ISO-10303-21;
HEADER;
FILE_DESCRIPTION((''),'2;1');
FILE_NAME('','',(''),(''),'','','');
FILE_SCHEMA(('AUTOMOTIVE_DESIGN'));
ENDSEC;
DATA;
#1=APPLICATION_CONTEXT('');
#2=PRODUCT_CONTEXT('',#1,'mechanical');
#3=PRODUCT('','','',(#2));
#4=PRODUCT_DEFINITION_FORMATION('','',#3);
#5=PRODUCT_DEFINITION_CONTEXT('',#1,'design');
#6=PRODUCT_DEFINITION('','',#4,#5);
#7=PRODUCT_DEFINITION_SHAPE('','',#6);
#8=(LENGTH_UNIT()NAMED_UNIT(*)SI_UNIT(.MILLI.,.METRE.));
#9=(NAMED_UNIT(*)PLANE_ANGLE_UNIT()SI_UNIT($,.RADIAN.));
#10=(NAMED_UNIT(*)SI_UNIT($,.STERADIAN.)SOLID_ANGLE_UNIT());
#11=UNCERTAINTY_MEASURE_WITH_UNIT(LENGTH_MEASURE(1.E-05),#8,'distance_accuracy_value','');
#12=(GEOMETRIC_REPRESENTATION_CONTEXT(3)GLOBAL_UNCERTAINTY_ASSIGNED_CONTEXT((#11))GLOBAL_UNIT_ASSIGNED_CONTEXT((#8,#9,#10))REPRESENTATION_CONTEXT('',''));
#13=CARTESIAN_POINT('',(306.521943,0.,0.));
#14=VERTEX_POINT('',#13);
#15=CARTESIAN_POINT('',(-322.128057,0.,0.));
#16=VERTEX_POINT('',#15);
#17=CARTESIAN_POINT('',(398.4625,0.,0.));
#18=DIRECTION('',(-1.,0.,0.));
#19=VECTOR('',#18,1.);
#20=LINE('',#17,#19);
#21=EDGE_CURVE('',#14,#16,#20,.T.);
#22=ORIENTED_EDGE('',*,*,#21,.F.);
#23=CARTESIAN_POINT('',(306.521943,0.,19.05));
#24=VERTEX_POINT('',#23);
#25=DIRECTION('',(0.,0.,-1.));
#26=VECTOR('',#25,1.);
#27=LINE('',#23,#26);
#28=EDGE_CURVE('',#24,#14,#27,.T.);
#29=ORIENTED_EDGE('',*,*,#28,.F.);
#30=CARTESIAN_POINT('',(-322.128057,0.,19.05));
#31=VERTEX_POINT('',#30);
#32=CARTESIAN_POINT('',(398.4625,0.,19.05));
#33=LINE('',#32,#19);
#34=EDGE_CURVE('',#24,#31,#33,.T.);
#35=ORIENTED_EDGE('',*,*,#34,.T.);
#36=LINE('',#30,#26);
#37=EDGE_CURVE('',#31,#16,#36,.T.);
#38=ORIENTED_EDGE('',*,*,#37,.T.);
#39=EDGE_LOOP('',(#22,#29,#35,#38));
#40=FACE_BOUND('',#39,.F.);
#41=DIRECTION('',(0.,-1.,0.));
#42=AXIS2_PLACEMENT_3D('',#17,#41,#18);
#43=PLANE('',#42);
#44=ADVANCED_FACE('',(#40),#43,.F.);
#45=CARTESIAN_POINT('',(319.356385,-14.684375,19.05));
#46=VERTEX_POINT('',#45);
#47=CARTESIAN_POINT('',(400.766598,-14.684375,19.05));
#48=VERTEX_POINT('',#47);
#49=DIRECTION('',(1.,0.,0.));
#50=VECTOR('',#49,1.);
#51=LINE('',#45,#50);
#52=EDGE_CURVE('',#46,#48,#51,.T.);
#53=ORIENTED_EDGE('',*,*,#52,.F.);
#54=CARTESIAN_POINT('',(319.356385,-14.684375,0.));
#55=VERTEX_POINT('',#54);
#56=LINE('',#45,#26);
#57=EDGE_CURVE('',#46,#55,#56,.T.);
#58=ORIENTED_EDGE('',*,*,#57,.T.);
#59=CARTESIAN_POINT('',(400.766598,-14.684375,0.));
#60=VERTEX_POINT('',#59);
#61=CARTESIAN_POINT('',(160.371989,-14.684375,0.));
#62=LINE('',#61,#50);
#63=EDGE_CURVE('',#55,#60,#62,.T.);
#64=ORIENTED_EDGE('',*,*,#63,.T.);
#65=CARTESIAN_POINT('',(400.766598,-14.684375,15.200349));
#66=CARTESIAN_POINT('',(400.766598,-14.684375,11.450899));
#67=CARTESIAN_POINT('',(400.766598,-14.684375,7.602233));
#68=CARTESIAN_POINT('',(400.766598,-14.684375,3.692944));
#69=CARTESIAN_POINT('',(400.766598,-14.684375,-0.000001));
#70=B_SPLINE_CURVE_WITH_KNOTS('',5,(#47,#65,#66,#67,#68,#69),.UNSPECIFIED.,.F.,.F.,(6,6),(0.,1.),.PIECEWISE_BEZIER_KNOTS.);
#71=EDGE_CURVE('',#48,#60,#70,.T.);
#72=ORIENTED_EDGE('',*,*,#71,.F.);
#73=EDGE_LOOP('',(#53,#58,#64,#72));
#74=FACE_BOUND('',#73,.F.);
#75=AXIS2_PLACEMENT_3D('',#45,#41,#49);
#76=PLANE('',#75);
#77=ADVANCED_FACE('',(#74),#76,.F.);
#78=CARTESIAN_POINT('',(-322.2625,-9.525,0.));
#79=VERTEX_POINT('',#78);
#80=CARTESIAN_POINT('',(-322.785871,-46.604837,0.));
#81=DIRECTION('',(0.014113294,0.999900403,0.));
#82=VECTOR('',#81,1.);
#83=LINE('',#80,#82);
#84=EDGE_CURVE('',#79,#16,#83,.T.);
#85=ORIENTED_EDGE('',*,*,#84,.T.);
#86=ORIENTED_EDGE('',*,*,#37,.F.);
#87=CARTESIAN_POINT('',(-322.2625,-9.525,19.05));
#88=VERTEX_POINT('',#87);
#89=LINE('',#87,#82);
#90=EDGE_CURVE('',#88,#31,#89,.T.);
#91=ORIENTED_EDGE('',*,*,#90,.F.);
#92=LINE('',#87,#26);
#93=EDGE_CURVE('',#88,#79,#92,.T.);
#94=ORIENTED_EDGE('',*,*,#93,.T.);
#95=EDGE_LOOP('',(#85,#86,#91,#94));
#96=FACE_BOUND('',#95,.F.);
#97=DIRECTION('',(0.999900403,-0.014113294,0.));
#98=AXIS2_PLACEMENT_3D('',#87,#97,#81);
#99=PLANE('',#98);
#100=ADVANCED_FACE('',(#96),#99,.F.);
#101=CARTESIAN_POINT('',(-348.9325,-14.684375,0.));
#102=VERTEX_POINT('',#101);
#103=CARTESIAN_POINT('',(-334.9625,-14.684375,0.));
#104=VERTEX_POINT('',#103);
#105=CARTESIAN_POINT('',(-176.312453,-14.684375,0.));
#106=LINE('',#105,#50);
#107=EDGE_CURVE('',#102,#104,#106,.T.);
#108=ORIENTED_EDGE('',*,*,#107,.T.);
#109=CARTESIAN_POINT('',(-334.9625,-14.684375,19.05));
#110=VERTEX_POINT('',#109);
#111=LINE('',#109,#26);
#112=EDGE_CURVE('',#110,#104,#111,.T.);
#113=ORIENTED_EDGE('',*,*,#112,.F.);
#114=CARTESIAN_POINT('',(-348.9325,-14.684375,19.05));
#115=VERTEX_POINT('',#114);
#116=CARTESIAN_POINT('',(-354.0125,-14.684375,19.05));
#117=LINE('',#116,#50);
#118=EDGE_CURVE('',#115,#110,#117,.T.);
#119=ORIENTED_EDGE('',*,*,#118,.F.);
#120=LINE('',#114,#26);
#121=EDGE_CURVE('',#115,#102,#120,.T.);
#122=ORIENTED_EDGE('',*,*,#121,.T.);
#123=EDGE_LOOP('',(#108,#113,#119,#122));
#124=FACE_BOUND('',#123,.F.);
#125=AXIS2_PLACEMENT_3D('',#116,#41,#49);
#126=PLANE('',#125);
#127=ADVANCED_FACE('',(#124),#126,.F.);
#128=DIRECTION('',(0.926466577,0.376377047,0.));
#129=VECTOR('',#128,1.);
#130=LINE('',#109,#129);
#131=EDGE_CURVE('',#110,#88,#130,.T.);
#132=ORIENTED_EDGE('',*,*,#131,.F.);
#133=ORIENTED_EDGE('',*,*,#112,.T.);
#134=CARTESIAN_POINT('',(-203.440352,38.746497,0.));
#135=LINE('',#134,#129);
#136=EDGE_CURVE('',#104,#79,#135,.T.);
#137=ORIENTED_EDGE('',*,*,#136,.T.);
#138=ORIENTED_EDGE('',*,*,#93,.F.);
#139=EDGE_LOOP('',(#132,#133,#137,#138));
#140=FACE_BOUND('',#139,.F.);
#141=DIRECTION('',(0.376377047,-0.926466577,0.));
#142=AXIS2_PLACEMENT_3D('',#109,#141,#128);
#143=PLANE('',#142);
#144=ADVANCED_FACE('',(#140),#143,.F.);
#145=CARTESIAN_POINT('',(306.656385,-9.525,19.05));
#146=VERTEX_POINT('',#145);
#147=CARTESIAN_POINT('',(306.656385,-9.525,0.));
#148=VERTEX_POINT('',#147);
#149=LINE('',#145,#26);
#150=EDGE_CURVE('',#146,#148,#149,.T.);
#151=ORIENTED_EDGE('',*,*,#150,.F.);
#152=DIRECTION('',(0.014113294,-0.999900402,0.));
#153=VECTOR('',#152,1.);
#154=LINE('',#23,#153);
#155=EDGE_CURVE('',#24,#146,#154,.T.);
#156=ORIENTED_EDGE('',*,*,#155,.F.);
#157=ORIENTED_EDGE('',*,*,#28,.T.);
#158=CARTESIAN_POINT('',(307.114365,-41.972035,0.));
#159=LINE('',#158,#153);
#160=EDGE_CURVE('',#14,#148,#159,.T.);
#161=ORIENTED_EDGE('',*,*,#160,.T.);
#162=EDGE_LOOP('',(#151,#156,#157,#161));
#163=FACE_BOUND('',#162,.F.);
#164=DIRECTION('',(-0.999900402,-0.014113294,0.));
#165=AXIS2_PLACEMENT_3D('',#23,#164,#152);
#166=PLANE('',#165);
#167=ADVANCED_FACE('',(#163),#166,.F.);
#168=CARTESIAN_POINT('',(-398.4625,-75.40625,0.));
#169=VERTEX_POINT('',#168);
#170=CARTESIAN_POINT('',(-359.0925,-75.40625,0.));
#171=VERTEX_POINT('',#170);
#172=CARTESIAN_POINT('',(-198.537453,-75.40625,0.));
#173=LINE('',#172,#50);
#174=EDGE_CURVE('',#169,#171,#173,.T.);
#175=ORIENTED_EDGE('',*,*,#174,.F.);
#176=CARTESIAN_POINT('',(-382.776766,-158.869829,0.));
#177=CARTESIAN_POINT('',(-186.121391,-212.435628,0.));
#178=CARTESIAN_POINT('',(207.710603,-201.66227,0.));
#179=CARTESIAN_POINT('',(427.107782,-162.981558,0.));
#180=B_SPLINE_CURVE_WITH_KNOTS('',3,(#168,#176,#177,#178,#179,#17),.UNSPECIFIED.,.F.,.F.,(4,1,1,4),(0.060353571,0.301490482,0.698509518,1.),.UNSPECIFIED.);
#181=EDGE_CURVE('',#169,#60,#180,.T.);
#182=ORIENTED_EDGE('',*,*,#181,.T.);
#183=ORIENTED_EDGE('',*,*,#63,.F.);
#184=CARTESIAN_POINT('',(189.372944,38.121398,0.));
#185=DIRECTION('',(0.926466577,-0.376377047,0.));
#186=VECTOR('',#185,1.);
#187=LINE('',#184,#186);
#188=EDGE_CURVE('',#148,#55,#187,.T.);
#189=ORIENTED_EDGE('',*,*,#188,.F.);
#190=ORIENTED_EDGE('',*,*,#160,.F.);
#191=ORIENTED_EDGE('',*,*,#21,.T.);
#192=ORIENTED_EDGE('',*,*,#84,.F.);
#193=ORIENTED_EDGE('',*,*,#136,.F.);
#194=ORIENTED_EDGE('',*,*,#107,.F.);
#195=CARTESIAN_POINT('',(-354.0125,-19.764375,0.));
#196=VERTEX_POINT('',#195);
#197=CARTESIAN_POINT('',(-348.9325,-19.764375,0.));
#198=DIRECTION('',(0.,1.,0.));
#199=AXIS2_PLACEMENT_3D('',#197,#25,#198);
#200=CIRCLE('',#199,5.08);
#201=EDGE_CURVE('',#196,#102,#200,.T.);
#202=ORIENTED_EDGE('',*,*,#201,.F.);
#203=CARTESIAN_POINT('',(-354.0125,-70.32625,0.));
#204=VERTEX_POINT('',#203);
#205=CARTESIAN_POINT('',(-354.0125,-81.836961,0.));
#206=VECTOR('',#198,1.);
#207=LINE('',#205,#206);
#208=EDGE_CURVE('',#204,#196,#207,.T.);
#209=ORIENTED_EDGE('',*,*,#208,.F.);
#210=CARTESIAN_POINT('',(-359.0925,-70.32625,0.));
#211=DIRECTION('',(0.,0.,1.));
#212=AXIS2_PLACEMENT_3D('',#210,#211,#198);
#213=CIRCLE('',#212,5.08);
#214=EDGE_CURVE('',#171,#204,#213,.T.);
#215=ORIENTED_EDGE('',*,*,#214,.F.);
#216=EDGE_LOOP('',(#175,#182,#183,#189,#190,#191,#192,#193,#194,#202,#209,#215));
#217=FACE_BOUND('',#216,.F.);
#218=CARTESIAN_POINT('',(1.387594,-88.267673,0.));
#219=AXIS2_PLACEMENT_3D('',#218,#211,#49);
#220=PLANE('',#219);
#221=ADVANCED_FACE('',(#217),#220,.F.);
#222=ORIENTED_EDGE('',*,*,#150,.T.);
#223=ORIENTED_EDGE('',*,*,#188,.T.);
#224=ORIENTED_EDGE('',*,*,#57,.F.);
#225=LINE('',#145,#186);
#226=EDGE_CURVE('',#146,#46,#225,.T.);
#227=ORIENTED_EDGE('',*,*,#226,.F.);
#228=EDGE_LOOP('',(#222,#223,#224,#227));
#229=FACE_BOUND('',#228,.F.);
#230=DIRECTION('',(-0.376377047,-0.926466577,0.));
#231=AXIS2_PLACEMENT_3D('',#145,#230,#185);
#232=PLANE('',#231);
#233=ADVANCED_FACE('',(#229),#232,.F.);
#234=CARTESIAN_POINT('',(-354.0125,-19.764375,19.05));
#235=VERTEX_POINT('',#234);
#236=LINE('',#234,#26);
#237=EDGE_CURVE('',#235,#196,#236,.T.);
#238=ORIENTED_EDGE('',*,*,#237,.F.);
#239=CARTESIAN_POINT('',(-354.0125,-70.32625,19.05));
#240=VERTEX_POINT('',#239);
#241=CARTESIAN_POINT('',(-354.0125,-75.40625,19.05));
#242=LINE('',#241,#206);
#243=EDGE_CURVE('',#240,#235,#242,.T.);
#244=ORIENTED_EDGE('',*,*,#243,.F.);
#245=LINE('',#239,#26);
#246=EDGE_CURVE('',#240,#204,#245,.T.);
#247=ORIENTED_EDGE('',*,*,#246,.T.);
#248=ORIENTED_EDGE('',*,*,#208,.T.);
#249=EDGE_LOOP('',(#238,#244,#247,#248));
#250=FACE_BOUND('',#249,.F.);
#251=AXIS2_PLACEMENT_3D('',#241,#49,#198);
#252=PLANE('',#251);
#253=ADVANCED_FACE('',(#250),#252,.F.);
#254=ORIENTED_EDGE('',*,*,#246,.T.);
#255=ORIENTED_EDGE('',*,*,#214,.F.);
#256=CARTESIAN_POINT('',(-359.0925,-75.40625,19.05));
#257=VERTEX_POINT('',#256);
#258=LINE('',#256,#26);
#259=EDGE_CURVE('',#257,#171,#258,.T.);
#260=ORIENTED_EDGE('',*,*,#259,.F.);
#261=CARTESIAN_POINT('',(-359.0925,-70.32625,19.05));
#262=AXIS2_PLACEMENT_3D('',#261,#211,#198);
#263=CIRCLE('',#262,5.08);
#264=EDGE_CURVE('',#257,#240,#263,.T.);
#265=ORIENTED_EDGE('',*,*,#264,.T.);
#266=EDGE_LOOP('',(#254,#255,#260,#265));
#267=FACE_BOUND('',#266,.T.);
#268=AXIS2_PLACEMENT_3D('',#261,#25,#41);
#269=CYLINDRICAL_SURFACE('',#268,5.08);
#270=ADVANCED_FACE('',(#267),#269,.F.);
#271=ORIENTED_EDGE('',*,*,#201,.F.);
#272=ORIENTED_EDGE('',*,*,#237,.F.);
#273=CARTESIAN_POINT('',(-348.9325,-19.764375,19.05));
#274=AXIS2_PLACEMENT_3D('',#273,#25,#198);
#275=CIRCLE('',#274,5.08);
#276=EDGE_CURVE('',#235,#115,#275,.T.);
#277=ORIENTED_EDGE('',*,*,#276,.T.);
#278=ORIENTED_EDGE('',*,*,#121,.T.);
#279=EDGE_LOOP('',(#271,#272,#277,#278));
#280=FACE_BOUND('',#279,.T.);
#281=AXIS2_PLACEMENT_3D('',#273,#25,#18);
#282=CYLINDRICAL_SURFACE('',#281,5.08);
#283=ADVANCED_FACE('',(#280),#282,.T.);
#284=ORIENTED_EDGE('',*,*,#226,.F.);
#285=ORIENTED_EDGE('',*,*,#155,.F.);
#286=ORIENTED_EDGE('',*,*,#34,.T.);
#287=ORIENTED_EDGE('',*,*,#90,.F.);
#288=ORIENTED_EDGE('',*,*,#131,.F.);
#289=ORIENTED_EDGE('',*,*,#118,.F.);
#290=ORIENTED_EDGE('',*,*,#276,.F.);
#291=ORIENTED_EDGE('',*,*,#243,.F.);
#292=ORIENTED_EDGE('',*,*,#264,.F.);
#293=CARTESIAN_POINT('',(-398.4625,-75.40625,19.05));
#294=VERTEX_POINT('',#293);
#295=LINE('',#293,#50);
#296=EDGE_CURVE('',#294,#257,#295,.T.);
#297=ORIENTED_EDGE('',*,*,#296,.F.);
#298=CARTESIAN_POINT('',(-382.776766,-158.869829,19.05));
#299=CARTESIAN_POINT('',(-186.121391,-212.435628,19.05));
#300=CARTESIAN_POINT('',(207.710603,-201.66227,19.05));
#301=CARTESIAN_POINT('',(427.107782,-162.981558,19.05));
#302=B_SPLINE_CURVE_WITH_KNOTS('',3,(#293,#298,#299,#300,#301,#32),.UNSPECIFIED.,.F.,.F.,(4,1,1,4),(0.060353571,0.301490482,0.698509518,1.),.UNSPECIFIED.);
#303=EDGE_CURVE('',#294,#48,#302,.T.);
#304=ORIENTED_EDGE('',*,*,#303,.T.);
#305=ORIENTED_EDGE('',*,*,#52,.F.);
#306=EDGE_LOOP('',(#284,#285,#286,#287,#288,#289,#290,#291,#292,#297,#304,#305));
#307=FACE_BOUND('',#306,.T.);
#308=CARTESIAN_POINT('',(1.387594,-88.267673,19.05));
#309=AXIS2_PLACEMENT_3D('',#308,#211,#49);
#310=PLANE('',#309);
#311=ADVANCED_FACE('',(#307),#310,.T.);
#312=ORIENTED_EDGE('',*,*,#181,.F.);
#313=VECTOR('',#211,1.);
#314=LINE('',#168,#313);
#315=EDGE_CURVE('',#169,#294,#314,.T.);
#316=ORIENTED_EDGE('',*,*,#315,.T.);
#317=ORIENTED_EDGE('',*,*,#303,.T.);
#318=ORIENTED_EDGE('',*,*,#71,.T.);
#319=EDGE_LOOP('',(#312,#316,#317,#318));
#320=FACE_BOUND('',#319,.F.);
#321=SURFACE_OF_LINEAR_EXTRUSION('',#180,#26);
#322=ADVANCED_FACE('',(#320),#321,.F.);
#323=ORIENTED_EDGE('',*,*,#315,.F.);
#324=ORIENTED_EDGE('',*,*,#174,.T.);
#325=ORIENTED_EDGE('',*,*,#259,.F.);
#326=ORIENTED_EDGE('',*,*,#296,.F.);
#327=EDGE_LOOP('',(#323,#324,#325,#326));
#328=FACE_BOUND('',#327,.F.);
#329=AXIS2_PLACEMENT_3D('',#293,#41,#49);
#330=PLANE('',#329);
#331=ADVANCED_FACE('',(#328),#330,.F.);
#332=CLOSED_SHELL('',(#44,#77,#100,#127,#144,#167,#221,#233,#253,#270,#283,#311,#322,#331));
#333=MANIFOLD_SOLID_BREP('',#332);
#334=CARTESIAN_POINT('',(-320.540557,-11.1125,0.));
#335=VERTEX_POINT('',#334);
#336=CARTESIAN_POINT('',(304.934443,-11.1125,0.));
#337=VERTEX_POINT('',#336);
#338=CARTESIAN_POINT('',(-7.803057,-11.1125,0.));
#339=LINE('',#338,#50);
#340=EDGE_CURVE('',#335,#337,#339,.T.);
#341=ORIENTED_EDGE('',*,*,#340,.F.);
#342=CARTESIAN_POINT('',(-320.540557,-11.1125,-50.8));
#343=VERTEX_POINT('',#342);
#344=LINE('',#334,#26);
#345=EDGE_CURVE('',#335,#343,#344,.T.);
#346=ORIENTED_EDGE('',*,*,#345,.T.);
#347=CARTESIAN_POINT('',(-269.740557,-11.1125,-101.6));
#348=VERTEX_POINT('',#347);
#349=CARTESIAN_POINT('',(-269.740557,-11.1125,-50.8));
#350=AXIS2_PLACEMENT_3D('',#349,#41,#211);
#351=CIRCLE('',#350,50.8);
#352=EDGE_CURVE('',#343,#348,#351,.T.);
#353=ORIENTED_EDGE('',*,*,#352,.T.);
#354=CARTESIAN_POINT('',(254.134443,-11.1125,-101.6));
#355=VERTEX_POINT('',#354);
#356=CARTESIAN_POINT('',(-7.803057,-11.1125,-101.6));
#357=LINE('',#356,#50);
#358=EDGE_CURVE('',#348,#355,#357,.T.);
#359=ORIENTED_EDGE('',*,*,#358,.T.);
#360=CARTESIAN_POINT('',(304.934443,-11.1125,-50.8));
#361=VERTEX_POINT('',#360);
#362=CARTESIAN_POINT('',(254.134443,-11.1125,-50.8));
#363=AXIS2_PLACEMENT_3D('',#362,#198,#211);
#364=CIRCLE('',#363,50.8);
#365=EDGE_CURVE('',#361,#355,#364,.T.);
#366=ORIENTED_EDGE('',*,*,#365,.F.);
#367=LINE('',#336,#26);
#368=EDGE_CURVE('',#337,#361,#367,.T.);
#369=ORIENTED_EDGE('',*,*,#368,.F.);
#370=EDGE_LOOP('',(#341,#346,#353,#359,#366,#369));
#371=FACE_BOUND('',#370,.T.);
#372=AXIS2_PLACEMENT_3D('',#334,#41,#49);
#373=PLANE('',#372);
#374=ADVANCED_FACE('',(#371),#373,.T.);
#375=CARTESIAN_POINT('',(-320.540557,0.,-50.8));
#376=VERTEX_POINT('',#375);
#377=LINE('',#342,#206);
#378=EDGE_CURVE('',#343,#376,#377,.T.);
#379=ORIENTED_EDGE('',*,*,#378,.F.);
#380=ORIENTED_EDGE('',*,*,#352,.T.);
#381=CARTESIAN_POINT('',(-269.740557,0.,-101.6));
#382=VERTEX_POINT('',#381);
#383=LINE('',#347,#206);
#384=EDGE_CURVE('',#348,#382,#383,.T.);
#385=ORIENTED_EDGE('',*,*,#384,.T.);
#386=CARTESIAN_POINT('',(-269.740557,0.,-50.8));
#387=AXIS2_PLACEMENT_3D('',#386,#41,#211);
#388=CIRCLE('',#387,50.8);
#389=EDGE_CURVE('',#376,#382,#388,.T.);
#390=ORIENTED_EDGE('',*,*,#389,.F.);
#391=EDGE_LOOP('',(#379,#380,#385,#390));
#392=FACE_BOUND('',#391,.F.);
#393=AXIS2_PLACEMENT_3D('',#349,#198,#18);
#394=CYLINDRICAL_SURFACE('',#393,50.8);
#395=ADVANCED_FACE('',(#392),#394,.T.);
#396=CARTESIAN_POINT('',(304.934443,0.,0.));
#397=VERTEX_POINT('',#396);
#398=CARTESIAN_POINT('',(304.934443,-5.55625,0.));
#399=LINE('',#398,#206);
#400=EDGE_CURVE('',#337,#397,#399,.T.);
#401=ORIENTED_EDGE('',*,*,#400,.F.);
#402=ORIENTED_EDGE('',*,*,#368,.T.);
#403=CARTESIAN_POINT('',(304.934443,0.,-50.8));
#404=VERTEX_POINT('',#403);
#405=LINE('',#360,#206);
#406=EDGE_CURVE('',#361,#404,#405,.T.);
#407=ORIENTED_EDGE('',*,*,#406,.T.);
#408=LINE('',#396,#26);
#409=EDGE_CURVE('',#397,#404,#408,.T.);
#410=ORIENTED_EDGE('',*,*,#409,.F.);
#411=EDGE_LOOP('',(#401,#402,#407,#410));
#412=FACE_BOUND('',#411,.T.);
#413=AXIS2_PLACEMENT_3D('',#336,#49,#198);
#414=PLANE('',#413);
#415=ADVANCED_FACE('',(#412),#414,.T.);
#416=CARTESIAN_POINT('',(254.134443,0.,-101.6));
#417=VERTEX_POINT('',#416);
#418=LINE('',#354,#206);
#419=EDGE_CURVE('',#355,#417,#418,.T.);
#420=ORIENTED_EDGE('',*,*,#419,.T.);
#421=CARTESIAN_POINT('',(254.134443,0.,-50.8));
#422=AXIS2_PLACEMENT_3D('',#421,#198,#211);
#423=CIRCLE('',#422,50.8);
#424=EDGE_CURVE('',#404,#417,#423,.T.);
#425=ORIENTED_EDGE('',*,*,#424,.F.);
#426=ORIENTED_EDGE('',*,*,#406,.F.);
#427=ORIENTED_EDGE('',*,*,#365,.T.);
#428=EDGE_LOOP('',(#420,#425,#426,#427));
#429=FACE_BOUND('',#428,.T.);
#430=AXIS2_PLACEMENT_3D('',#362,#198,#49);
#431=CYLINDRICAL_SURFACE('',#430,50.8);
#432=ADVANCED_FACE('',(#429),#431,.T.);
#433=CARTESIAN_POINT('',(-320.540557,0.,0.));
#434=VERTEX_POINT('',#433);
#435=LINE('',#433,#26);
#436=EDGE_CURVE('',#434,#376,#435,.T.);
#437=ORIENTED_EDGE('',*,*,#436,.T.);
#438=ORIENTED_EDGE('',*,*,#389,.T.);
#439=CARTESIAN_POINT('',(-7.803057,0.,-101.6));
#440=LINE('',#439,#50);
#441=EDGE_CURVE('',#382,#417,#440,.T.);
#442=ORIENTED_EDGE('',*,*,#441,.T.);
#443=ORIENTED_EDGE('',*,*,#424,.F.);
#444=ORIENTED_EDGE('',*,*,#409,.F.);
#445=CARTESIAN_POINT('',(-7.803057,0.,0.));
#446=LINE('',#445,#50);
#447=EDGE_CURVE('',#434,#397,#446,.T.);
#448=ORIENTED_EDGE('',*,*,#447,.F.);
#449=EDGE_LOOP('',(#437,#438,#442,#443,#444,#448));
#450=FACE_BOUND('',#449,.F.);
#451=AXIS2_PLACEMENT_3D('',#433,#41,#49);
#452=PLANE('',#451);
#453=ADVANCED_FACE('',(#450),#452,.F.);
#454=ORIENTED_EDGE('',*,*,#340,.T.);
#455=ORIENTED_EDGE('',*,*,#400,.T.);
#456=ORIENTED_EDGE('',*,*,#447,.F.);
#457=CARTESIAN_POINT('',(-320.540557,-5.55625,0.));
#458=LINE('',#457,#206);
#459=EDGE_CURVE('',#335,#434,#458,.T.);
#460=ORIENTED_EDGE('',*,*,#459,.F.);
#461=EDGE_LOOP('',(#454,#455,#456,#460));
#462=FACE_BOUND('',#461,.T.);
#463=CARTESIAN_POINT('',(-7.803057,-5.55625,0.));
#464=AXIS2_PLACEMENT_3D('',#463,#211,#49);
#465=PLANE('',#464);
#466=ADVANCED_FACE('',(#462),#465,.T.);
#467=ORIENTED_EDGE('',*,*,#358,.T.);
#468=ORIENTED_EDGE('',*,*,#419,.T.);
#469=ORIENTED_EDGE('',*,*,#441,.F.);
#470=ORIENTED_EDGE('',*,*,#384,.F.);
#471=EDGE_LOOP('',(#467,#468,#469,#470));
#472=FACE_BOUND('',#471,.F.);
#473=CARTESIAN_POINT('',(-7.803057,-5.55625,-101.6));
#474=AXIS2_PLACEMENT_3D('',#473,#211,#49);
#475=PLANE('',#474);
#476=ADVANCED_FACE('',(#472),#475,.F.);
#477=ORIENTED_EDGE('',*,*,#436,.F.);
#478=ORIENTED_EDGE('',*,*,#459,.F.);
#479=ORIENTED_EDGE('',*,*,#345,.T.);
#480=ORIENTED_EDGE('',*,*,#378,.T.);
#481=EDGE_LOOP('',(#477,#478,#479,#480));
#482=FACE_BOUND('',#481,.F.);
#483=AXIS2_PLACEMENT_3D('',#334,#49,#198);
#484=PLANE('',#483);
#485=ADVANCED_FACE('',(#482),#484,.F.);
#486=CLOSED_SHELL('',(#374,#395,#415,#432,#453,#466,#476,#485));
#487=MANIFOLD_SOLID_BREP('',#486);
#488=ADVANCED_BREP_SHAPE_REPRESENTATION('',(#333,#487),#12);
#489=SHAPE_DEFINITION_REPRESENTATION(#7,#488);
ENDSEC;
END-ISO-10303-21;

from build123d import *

# Parameters (mm, degrees)
F1_DEPTH = 19.05
F3_DEPTH = 25.4
F4_W     = 625.475
F4_H     = 11.1125
F5_DEPTH = 101.6
F6_R     = 50.8
F7_R     = 5.08


with BuildPart() as f1:
    # F0 (on Top) → F1 (new body)
    with BuildSketch(Plane.XY):
        with BuildLine():
            Line((398.4625, 0), (-398.4625, 0))
            Line((-398.4625, 0), (-398.4625, -75.40625))
            add(Edge.make_bspline(
                [(-398.4625, -75.40625), (-382.7767657486, -158.8698293815), (-186.1213914705, -212.4356276363), (207.7106026788, -201.6622700018), (427.1077817692, -162.9815576871), (398.4625, 0)],
                knots=[0.0603535709, 0.0603535709, 0.0603535709, 0.0603535709, 0.3014904815, 0.6985095185, 1, 1, 1, 1], degree=3))
        make_face()
    extrude(amount=F1_DEPTH)

    # F2 (on face) → F3 (cut)
    with BuildSketch(Plane.XY.offset(19.05)):
        Polygon((-322.1280574799, 0), (-398.4625, 0), (-398.4625, -75.40625), (-354.0125, -75.40625), (-354.0125, -14.684375), (-334.9625, -14.684375), (-322.2625, -9.525), align=None)
        Polygon((398.4625, 0), (382.8563850403, 0), (306.5219425201, 0), (306.6563850403, -9.525), (319.3563850403, -14.684375), (338.4063850403, -14.684375), (402.6769697666, -14.684375), align=None)
    extrude(amount=-F3_DEPTH, mode=Mode.SUBTRACT)

    # F7
    f7_edges = [f1.edges().sort_by_distance(p)[0] for p in [
        (-354.0125, -75.40625, 9.525),
        (-354.0125, -14.684375, 9.525),
    ]]
    fillet(f7_edges, radius=F7_R)


with BuildPart() as f5:
    # F4 (on Top) → F5 (new body)
    with BuildSketch(Plane.XY):
        with Locations((-7.8030574799, -5.55625)):
            Rectangle(F4_W, F4_H)
    extrude(amount=-F5_DEPTH)

    # F6
    f6_edges = [f5.edges().sort_by_distance(p)[0] for p in [
        (-320.540557, -5.55625, -101.6),
        (304.934443, -5.55625, -101.6),
    ]]
    fillet(f6_edges, radius=F6_R)


solid = Compound([f1.part, f5.part])
